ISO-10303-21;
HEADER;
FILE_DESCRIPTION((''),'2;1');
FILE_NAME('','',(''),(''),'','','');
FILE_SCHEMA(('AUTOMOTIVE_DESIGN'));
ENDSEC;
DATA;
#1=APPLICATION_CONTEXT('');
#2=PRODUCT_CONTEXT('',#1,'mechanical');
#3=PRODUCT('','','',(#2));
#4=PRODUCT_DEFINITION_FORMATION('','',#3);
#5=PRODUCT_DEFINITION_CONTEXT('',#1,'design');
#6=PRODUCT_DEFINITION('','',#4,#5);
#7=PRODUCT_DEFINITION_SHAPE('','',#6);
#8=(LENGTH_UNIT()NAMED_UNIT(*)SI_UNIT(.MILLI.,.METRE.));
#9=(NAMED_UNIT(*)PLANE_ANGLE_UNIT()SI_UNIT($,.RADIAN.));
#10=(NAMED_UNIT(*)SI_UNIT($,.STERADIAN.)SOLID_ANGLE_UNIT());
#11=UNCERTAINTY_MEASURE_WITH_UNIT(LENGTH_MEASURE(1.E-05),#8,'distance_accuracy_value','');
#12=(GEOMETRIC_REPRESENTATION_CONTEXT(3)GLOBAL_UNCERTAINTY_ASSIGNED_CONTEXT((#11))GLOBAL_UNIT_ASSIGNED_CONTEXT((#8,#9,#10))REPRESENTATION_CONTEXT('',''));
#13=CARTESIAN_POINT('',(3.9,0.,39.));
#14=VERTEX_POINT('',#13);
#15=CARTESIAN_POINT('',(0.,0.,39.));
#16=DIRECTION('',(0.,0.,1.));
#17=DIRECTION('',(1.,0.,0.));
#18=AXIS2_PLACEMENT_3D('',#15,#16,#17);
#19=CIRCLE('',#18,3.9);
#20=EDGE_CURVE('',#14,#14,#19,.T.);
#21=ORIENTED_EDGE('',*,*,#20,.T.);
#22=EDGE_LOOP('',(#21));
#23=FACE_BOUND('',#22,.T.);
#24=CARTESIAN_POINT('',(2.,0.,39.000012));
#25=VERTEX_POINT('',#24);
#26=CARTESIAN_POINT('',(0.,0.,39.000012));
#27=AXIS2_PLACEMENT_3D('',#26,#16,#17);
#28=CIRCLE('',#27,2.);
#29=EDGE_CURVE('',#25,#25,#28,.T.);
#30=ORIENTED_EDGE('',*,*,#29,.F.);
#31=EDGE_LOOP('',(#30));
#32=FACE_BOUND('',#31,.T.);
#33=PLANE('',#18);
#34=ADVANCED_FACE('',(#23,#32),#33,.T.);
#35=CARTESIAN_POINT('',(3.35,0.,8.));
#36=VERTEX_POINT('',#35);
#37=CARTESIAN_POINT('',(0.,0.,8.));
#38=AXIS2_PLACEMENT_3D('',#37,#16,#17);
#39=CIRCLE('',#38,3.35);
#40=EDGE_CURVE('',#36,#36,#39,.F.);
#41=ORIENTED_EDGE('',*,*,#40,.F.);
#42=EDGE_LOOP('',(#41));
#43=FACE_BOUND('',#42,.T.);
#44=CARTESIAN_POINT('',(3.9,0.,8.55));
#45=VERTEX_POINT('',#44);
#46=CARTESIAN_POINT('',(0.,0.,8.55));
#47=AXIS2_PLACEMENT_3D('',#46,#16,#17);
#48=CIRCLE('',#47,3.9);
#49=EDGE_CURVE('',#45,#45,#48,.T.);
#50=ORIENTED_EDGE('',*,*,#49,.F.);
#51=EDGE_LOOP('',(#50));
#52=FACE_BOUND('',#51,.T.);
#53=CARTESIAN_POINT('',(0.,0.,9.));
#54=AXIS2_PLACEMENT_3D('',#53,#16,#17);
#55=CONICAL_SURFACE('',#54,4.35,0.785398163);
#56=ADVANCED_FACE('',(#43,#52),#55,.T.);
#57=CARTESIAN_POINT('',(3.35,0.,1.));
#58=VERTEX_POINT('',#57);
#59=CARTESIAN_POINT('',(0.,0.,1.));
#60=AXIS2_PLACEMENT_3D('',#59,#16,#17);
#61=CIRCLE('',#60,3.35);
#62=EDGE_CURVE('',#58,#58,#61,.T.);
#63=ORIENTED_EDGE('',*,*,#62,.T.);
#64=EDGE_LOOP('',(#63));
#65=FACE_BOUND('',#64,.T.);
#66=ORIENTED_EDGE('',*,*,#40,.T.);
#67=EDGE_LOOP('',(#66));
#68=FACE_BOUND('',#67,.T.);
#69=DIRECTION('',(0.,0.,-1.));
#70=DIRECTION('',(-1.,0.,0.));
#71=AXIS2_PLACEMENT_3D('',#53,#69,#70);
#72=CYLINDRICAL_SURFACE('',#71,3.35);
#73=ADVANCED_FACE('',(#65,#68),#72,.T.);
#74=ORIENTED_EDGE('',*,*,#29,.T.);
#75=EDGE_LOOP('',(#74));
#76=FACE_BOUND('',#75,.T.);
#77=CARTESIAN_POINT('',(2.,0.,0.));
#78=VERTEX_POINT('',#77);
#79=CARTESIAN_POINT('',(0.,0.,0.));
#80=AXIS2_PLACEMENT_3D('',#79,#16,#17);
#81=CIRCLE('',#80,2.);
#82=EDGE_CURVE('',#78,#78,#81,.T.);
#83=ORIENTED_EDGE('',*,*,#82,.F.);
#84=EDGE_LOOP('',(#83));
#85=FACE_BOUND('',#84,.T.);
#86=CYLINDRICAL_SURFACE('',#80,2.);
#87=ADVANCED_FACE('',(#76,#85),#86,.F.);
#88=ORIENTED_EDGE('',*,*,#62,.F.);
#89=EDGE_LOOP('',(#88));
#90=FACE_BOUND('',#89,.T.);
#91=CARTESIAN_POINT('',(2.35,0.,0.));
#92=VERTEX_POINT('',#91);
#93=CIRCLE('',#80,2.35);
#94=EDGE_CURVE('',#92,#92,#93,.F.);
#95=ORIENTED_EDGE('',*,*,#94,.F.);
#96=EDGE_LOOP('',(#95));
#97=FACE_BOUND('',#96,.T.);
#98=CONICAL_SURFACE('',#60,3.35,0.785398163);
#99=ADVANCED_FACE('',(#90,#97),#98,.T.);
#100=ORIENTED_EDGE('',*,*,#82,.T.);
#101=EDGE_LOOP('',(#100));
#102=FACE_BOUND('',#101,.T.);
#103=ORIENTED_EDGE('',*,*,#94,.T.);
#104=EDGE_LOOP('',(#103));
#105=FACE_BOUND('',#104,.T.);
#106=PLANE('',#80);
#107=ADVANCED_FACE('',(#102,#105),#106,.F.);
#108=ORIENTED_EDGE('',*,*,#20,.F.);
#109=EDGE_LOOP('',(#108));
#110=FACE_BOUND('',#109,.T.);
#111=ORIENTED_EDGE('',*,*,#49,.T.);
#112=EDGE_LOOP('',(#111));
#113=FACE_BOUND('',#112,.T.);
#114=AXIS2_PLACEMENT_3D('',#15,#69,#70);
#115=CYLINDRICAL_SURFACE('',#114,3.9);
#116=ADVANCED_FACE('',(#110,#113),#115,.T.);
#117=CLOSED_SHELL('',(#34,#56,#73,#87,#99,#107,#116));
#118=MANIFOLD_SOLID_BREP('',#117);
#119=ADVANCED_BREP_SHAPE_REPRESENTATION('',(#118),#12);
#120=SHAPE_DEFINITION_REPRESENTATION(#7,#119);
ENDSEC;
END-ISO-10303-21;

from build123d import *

# Parameters (mm, degrees)
SKETCH1_R               = 3.35
BOSS_EXTRUDE1_DEPTH     = 9
SKETCH2_R               = 3.9
BOSS_EXTRUDE2_DEPTH     = 30
CHAMFER1_SIZE           = 1
CHAMFER2_SIZE           = 1
CUT_EXTRUDE1_DEPTH      = 40.38806926
CUT_EXTRUDE1_DEPTH_BACK = 40.38806926
SKETCH8_R               = 2


with BuildPart() as part:
    # Sketch1 → Boss-Extrude1 (new body)
    with BuildSketch(Plane(origin=(0, 0, 0), x_dir=(0, 1, 0), z_dir=(0, 0, 1))):
        with Locations(Location((0, 0, 0), (0, 0, 270))):
            Circle(SKETCH1_R)
    extrude(amount=BOSS_EXTRUDE1_DEPTH)

    # Sketch2 → Boss-Extrude2 (add)
    with BuildSketch(Plane.XY.offset(9)):
        Circle(SKETCH2_R)
    extrude(amount=BOSS_EXTRUDE2_DEPTH)

    # Chamfer1
    # the kernel refuses this chamfer: 1 mm, written as the material it adds along each edge
    with BuildSketch(Plane(origin=(0, 0, 9), x_dir=(1, 0, 0), z_dir=(0, -1, 0))) as chamfer1_piece_1_section:
        Polygon((3.35 + CHAMFER1_SIZE, 0), (3.35, -CHAMFER1_SIZE), (3.35, 0), align=None)
    chamfer1_piece_1 = revolve(axis=Axis((0, 0, 9), (0, 0, 1)), mode=Mode.PRIVATE)
    chamfer1_piece_1 = chamfer1_piece_1 & Plane(origin=(0, 0, 8.27596247), x_dir=(1, 0, 0), z_dir=(0, 0, -1)) * Cylinder(3.9, 18, mode=Mode.PRIVATE)
    add(chamfer1_piece_1)

    # Chamfer2
    chamfer2_edges = [part.edges().sort_by_distance(p)[0] for p in [
        (-3.35, 0, 0),
    ]]
    chamfer(chamfer2_edges, length=CHAMFER2_SIZE)

    # Sketch8 → Cut-Extrude1 (cut, two sides: drawn at the far end of the back side and taken through both)
    with BuildSketch(Plane.XY.offset(39).offset(-CUT_EXTRUDE1_DEPTH_BACK)):
        Circle(SKETCH8_R)
    extrude(amount=CUT_EXTRUDE1_DEPTH + CUT_EXTRUDE1_DEPTH_BACK, mode=Mode.SUBTRACT)


solid = part.part
